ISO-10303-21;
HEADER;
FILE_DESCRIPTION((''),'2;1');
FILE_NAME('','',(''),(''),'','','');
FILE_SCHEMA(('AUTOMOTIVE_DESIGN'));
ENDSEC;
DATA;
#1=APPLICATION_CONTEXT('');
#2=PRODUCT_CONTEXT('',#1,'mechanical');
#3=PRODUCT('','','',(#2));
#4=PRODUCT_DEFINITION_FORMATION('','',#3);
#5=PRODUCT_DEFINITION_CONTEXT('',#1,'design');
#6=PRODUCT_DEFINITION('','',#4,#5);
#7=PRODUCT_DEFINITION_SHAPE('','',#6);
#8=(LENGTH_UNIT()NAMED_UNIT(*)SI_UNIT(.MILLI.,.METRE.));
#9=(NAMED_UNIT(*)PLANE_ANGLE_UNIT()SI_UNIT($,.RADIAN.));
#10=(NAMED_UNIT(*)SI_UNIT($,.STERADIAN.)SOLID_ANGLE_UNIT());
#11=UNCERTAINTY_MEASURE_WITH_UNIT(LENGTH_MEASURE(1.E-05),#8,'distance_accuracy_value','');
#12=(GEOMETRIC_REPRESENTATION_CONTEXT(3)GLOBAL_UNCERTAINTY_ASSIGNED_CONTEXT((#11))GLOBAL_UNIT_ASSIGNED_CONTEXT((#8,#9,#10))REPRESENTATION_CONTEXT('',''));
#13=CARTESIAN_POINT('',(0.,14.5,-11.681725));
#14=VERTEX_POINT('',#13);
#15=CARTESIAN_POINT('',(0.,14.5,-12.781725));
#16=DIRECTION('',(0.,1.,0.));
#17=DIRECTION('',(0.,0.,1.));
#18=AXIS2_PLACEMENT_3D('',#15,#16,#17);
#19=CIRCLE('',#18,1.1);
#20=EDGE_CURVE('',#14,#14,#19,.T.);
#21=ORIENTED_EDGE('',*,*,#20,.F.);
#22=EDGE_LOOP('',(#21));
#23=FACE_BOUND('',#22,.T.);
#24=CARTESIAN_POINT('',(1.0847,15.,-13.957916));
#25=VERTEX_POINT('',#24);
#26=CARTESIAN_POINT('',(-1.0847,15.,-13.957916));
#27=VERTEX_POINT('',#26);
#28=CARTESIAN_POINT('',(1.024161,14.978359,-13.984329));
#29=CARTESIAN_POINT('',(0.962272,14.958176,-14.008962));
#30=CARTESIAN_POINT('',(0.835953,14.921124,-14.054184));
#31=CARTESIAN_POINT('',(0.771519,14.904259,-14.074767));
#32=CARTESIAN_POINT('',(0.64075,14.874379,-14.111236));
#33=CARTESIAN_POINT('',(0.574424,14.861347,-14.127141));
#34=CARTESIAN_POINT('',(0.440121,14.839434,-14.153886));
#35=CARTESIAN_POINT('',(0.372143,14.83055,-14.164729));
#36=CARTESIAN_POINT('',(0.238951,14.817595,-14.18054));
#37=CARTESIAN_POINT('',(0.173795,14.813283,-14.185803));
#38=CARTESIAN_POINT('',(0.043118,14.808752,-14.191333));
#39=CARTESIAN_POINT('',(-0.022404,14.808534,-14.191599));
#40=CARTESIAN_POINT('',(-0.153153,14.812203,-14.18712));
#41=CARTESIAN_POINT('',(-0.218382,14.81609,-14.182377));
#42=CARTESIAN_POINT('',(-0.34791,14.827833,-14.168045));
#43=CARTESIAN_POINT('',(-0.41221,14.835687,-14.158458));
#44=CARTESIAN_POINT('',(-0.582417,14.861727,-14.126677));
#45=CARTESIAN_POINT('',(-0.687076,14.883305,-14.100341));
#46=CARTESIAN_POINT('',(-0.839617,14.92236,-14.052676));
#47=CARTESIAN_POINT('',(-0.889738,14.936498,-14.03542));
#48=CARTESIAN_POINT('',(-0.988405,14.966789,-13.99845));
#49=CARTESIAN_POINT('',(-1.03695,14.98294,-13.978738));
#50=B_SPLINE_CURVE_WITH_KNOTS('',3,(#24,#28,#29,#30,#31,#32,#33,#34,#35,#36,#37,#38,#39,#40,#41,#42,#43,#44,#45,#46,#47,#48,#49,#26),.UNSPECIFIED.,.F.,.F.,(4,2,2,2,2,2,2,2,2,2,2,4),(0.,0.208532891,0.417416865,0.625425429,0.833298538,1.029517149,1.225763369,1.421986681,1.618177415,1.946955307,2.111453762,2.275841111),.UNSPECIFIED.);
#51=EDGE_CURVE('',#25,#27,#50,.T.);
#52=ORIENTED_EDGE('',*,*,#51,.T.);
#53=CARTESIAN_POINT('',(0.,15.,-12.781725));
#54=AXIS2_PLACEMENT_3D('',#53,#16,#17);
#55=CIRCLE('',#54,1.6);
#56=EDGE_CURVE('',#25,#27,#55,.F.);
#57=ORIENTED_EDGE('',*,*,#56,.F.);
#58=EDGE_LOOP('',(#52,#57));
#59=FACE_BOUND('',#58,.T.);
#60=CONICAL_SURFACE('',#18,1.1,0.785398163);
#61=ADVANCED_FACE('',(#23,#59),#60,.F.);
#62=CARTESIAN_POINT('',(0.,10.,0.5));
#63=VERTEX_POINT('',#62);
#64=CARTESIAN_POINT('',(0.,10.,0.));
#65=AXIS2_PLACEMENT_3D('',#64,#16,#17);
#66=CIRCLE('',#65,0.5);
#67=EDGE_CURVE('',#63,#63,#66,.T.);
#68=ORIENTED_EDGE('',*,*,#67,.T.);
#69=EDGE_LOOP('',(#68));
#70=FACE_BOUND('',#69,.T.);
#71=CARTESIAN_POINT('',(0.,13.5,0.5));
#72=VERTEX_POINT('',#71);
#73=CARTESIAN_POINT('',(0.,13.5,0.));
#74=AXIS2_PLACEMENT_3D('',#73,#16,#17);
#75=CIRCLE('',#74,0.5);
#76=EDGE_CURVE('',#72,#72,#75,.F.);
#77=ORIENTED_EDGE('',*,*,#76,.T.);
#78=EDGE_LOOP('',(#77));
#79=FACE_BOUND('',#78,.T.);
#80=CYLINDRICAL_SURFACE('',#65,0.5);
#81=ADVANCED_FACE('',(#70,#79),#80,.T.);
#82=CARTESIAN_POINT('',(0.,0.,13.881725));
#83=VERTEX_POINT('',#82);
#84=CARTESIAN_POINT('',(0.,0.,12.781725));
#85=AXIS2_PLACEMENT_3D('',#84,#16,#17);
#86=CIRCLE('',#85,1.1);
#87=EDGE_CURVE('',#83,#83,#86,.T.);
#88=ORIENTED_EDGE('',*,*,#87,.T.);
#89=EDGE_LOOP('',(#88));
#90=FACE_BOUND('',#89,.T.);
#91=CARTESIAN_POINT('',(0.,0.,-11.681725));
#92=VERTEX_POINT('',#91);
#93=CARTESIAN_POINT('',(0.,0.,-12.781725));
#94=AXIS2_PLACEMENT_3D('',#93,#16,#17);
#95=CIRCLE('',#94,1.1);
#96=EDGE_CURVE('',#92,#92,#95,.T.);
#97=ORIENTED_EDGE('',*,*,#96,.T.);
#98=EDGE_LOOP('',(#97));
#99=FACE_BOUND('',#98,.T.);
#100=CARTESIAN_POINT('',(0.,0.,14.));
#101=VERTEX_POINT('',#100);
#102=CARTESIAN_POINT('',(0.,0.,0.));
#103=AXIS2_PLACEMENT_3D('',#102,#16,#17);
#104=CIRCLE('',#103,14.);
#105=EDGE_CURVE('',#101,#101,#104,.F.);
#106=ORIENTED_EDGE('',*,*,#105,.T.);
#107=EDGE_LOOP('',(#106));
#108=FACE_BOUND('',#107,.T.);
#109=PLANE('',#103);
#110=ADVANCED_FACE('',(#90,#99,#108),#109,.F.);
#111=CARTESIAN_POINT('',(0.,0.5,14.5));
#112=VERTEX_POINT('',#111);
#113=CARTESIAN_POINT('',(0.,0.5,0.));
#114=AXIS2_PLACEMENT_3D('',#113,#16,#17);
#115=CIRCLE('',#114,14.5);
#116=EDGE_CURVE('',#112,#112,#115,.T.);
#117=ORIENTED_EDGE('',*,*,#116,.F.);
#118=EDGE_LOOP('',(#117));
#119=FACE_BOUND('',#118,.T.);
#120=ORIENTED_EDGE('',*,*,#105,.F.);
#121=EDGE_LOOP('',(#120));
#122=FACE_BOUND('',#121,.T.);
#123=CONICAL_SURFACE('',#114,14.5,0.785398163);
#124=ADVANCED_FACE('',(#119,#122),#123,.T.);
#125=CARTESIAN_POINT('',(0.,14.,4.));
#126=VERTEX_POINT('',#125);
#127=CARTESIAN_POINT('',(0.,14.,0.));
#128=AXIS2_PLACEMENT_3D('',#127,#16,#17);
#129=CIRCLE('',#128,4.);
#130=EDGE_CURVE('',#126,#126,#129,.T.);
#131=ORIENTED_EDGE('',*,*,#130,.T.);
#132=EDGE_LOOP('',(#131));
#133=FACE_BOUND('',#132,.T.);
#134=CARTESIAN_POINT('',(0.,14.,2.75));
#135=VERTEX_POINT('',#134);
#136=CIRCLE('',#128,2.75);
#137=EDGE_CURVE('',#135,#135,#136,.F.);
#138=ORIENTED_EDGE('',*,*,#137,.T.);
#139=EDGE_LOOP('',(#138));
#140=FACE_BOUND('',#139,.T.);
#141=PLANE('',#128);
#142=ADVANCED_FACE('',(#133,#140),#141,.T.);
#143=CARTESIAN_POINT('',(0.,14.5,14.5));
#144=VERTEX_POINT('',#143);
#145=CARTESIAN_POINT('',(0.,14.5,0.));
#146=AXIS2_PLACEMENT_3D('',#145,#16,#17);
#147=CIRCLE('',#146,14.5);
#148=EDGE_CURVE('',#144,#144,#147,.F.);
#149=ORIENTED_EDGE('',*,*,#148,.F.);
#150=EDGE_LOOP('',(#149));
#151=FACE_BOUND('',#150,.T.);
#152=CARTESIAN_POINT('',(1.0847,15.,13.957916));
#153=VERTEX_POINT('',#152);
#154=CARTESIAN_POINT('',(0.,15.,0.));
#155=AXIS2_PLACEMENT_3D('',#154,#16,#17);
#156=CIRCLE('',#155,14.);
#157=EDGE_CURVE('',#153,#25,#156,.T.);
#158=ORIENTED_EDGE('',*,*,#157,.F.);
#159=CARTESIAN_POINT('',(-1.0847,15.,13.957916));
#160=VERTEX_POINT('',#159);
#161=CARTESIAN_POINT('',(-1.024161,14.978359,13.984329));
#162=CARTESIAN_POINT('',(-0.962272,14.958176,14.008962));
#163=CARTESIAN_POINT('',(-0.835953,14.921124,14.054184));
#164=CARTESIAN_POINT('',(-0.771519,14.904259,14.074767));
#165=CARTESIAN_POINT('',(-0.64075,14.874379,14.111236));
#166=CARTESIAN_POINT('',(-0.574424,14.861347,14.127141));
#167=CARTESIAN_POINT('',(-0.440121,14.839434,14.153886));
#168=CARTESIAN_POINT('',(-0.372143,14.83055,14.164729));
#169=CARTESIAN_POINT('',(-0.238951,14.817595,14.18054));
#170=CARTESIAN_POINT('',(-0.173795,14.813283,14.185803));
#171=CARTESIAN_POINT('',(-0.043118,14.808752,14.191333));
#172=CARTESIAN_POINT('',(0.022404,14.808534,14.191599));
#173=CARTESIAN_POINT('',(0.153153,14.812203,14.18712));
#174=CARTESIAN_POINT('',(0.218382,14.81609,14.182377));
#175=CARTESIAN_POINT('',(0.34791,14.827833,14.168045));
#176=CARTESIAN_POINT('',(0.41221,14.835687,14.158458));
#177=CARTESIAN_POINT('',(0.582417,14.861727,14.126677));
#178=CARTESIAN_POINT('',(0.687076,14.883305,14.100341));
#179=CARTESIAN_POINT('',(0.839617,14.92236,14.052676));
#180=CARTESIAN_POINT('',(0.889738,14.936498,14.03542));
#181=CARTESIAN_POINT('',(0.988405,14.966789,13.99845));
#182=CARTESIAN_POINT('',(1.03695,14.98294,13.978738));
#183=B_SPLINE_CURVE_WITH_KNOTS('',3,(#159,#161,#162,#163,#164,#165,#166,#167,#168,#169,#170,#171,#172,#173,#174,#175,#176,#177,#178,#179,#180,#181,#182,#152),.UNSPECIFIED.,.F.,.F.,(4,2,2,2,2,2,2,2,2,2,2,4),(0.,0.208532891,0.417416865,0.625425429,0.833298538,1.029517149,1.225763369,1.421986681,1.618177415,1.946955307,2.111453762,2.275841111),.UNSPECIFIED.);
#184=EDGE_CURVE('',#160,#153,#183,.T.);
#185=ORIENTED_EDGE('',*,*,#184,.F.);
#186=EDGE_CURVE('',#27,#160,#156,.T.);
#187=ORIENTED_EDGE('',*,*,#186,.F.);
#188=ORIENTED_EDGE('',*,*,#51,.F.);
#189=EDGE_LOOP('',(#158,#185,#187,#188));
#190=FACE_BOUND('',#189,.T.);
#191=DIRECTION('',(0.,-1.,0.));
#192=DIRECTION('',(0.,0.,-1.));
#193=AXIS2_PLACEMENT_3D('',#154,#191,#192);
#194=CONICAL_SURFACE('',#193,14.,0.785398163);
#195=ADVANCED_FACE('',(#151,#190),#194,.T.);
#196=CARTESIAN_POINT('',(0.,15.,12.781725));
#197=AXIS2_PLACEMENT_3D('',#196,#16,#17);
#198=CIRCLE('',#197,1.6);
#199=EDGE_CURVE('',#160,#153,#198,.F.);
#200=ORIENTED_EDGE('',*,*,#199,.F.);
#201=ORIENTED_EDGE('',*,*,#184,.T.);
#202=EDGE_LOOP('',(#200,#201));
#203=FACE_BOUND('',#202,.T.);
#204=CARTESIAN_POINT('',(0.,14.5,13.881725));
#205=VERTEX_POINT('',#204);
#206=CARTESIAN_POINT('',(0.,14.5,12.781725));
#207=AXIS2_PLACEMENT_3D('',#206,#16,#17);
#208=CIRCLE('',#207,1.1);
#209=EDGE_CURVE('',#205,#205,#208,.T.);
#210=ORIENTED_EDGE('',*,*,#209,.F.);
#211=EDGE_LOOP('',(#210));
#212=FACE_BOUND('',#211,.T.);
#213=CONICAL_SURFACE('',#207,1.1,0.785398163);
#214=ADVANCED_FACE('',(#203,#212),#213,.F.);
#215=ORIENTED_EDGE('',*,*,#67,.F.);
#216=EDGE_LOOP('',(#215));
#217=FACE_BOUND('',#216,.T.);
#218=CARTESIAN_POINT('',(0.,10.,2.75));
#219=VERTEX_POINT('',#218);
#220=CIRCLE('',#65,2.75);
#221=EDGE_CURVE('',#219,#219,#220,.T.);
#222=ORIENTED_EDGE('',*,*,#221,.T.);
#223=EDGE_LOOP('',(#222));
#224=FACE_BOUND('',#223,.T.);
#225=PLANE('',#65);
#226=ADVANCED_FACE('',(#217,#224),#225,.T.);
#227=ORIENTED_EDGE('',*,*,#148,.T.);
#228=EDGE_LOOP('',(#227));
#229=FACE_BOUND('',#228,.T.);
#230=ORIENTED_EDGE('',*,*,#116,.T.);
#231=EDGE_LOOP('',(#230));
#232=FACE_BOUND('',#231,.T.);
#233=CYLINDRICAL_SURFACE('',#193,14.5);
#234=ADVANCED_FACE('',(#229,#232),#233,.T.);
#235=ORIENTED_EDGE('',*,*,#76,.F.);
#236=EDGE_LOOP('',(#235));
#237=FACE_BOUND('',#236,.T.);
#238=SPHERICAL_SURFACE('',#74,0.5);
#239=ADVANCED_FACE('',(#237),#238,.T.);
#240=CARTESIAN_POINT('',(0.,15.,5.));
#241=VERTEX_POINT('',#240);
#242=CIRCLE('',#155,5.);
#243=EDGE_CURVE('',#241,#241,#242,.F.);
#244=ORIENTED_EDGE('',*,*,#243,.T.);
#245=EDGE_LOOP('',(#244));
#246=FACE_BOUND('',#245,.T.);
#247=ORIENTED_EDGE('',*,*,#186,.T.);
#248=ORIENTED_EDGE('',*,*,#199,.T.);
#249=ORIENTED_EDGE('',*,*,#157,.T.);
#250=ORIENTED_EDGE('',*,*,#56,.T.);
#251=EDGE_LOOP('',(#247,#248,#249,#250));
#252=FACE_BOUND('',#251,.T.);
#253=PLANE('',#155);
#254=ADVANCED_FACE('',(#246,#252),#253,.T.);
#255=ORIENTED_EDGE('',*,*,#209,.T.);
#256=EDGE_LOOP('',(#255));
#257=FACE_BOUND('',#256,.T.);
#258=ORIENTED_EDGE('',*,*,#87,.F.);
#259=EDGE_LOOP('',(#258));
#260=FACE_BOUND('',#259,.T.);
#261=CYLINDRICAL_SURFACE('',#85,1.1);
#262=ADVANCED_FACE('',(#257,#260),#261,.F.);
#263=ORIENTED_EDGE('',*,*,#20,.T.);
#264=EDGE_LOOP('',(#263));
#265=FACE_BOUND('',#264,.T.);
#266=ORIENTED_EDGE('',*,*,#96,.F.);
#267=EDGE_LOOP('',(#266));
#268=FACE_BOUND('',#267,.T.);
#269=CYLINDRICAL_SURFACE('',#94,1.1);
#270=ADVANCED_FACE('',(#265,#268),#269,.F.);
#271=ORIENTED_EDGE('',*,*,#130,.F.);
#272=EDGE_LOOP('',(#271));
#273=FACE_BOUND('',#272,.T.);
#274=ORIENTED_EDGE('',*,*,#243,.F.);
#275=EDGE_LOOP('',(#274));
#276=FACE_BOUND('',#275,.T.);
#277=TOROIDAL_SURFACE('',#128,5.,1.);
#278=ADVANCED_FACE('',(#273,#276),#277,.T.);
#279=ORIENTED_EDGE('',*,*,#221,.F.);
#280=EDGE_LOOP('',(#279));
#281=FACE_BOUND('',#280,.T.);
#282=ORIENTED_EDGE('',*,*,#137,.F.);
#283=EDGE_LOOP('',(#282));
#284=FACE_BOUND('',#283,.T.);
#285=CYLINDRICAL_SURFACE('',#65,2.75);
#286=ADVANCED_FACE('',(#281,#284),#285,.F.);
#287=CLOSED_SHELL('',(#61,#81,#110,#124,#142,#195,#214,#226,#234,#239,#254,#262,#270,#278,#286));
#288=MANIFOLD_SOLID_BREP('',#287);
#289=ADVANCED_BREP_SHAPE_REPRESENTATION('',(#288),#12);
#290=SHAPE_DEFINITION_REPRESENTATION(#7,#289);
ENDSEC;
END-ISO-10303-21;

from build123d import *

# Parameters (mm, degrees)
SKETCH1_R           = 14.5
BOSS_EXTRUDE1_DEPTH = 15
SKETCH2_R           = 1.1
CUT_EXTRUDE1_DEPTH  = 15
CHAMFER1_SIZE       = 0.5
CHAMFER2_SIZE       = 0.5
SKETCH3_R           = 2.75
SKETCH3_R_2         = 0.5
CUT_EXTRUDE2_DEPTH  = 5
SKETCH4_R           = 4
CUT_EXTRUDE3_DEPTH  = 1
FILLET1_R           = 1
FILLET2_R           = 0.5


# Some blends are built 0.0001 mm under size
with BuildPart() as part:
    # Sketch1 → Boss-Extrude1 (new body)
    with BuildSketch(Plane(origin=(0, 0, 0), x_dir=(1, 0, 0), z_dir=(0, 1, 0))):
        with Locations(Location((0, 0, 0), (0, 0, 270))):
            Circle(SKETCH1_R)
    extrude(amount=BOSS_EXTRUDE1_DEPTH)

    # Sketch2 → Cut-Extrude1 (cut)
    with BuildSketch(Plane(origin=(0, 15, 0), x_dir=(1, 0, 0), z_dir=(0, 1, 0))):
        with Locations(Location((0, 12.781725236, 0), (0, 0, 270))):
            Circle(SKETCH2_R)
        with Locations(Location((0, -12.781725236, 0), (0, 0, 270))):
            Circle(SKETCH2_R)
    extrude(amount=-CUT_EXTRUDE1_DEPTH, mode=Mode.SUBTRACT)

    # Chamfer1
    chamfer1_edges = [part.edges().sort_by_distance(p)[0] for p in [
        (0, 15, -13.881725236),
        (0, 15, 11.681725236),
    ]]
    chamfer(chamfer1_edges, length=CHAMFER1_SIZE)

    # Chamfer2
    # the kernel refuses this chamfer: 0.5 mm, written as the material it takes off along each edge
    with BuildSketch(Plane(origin=(0, 0, 0), x_dir=(0, 0, 1), z_dir=(-1, 0, 0))) as chamfer2_piece_1:
        Polygon((14.5, CHAMFER2_SIZE), (14.5 - CHAMFER2_SIZE, 0), (14.5, 0), align=None)
    revolve(axis=Axis((0, 0, 0), (0, 1, 0)), mode=Mode.SUBTRACT)
    with BuildSketch(Plane(origin=(0, 15, 0), x_dir=(0, 0, 1), z_dir=(-1, 0, 0))) as chamfer2_piece_2:
        Polygon((14.5 - CHAMFER2_SIZE, 0), (14.5, -CHAMFER2_SIZE), (14.5, 0), align=None)
    revolve(axis=Axis((0, 15, 0), (0, 1, 0)), mode=Mode.SUBTRACT)

    # Sketch3 → Cut-Extrude2 (cut)
    with BuildSketch(Plane(origin=(0, 15, 0), x_dir=(1, 0, 0), z_dir=(0, 1, 0))):
        with Locations(Location((0, 0, 0), (0, 0, 270))):
            Circle(SKETCH3_R)
        with Locations(Location((0, 0, 0), (0, 0, 270))):
            Circle(SKETCH3_R_2, mode=Mode.SUBTRACT)
    extrude(amount=-CUT_EXTRUDE2_DEPTH, mode=Mode.SUBTRACT)

    # Sketch4 → Cut-Extrude3 (cut)
    with BuildSketch(Plane(origin=(0, 15, 0), x_dir=(1, 0, 0), z_dir=(0, 1, 0))):
        with Locations(Location((0, 0, 0), (0, 0, 270))):
            Circle(SKETCH4_R)
    extrude(amount=-CUT_EXTRUDE3_DEPTH, mode=Mode.SUBTRACT)

    # Fillet1
    fillet1_edges = [part.edges().sort_by_distance(p)[0] for p in [
        (0, 15, -4),
    ]]
    fillet(fillet1_edges, radius=FILLET1_R - 0.0001)  # a hair under: the kernel refuses the full size

    # Fillet2
    fillet2_edges = [part.edges().sort_by_distance(p)[0] for p in [
        (0, 14, -0.5),
    ]]
    fillet(fillet2_edges, radius=FILLET2_R)


solid = part.part
